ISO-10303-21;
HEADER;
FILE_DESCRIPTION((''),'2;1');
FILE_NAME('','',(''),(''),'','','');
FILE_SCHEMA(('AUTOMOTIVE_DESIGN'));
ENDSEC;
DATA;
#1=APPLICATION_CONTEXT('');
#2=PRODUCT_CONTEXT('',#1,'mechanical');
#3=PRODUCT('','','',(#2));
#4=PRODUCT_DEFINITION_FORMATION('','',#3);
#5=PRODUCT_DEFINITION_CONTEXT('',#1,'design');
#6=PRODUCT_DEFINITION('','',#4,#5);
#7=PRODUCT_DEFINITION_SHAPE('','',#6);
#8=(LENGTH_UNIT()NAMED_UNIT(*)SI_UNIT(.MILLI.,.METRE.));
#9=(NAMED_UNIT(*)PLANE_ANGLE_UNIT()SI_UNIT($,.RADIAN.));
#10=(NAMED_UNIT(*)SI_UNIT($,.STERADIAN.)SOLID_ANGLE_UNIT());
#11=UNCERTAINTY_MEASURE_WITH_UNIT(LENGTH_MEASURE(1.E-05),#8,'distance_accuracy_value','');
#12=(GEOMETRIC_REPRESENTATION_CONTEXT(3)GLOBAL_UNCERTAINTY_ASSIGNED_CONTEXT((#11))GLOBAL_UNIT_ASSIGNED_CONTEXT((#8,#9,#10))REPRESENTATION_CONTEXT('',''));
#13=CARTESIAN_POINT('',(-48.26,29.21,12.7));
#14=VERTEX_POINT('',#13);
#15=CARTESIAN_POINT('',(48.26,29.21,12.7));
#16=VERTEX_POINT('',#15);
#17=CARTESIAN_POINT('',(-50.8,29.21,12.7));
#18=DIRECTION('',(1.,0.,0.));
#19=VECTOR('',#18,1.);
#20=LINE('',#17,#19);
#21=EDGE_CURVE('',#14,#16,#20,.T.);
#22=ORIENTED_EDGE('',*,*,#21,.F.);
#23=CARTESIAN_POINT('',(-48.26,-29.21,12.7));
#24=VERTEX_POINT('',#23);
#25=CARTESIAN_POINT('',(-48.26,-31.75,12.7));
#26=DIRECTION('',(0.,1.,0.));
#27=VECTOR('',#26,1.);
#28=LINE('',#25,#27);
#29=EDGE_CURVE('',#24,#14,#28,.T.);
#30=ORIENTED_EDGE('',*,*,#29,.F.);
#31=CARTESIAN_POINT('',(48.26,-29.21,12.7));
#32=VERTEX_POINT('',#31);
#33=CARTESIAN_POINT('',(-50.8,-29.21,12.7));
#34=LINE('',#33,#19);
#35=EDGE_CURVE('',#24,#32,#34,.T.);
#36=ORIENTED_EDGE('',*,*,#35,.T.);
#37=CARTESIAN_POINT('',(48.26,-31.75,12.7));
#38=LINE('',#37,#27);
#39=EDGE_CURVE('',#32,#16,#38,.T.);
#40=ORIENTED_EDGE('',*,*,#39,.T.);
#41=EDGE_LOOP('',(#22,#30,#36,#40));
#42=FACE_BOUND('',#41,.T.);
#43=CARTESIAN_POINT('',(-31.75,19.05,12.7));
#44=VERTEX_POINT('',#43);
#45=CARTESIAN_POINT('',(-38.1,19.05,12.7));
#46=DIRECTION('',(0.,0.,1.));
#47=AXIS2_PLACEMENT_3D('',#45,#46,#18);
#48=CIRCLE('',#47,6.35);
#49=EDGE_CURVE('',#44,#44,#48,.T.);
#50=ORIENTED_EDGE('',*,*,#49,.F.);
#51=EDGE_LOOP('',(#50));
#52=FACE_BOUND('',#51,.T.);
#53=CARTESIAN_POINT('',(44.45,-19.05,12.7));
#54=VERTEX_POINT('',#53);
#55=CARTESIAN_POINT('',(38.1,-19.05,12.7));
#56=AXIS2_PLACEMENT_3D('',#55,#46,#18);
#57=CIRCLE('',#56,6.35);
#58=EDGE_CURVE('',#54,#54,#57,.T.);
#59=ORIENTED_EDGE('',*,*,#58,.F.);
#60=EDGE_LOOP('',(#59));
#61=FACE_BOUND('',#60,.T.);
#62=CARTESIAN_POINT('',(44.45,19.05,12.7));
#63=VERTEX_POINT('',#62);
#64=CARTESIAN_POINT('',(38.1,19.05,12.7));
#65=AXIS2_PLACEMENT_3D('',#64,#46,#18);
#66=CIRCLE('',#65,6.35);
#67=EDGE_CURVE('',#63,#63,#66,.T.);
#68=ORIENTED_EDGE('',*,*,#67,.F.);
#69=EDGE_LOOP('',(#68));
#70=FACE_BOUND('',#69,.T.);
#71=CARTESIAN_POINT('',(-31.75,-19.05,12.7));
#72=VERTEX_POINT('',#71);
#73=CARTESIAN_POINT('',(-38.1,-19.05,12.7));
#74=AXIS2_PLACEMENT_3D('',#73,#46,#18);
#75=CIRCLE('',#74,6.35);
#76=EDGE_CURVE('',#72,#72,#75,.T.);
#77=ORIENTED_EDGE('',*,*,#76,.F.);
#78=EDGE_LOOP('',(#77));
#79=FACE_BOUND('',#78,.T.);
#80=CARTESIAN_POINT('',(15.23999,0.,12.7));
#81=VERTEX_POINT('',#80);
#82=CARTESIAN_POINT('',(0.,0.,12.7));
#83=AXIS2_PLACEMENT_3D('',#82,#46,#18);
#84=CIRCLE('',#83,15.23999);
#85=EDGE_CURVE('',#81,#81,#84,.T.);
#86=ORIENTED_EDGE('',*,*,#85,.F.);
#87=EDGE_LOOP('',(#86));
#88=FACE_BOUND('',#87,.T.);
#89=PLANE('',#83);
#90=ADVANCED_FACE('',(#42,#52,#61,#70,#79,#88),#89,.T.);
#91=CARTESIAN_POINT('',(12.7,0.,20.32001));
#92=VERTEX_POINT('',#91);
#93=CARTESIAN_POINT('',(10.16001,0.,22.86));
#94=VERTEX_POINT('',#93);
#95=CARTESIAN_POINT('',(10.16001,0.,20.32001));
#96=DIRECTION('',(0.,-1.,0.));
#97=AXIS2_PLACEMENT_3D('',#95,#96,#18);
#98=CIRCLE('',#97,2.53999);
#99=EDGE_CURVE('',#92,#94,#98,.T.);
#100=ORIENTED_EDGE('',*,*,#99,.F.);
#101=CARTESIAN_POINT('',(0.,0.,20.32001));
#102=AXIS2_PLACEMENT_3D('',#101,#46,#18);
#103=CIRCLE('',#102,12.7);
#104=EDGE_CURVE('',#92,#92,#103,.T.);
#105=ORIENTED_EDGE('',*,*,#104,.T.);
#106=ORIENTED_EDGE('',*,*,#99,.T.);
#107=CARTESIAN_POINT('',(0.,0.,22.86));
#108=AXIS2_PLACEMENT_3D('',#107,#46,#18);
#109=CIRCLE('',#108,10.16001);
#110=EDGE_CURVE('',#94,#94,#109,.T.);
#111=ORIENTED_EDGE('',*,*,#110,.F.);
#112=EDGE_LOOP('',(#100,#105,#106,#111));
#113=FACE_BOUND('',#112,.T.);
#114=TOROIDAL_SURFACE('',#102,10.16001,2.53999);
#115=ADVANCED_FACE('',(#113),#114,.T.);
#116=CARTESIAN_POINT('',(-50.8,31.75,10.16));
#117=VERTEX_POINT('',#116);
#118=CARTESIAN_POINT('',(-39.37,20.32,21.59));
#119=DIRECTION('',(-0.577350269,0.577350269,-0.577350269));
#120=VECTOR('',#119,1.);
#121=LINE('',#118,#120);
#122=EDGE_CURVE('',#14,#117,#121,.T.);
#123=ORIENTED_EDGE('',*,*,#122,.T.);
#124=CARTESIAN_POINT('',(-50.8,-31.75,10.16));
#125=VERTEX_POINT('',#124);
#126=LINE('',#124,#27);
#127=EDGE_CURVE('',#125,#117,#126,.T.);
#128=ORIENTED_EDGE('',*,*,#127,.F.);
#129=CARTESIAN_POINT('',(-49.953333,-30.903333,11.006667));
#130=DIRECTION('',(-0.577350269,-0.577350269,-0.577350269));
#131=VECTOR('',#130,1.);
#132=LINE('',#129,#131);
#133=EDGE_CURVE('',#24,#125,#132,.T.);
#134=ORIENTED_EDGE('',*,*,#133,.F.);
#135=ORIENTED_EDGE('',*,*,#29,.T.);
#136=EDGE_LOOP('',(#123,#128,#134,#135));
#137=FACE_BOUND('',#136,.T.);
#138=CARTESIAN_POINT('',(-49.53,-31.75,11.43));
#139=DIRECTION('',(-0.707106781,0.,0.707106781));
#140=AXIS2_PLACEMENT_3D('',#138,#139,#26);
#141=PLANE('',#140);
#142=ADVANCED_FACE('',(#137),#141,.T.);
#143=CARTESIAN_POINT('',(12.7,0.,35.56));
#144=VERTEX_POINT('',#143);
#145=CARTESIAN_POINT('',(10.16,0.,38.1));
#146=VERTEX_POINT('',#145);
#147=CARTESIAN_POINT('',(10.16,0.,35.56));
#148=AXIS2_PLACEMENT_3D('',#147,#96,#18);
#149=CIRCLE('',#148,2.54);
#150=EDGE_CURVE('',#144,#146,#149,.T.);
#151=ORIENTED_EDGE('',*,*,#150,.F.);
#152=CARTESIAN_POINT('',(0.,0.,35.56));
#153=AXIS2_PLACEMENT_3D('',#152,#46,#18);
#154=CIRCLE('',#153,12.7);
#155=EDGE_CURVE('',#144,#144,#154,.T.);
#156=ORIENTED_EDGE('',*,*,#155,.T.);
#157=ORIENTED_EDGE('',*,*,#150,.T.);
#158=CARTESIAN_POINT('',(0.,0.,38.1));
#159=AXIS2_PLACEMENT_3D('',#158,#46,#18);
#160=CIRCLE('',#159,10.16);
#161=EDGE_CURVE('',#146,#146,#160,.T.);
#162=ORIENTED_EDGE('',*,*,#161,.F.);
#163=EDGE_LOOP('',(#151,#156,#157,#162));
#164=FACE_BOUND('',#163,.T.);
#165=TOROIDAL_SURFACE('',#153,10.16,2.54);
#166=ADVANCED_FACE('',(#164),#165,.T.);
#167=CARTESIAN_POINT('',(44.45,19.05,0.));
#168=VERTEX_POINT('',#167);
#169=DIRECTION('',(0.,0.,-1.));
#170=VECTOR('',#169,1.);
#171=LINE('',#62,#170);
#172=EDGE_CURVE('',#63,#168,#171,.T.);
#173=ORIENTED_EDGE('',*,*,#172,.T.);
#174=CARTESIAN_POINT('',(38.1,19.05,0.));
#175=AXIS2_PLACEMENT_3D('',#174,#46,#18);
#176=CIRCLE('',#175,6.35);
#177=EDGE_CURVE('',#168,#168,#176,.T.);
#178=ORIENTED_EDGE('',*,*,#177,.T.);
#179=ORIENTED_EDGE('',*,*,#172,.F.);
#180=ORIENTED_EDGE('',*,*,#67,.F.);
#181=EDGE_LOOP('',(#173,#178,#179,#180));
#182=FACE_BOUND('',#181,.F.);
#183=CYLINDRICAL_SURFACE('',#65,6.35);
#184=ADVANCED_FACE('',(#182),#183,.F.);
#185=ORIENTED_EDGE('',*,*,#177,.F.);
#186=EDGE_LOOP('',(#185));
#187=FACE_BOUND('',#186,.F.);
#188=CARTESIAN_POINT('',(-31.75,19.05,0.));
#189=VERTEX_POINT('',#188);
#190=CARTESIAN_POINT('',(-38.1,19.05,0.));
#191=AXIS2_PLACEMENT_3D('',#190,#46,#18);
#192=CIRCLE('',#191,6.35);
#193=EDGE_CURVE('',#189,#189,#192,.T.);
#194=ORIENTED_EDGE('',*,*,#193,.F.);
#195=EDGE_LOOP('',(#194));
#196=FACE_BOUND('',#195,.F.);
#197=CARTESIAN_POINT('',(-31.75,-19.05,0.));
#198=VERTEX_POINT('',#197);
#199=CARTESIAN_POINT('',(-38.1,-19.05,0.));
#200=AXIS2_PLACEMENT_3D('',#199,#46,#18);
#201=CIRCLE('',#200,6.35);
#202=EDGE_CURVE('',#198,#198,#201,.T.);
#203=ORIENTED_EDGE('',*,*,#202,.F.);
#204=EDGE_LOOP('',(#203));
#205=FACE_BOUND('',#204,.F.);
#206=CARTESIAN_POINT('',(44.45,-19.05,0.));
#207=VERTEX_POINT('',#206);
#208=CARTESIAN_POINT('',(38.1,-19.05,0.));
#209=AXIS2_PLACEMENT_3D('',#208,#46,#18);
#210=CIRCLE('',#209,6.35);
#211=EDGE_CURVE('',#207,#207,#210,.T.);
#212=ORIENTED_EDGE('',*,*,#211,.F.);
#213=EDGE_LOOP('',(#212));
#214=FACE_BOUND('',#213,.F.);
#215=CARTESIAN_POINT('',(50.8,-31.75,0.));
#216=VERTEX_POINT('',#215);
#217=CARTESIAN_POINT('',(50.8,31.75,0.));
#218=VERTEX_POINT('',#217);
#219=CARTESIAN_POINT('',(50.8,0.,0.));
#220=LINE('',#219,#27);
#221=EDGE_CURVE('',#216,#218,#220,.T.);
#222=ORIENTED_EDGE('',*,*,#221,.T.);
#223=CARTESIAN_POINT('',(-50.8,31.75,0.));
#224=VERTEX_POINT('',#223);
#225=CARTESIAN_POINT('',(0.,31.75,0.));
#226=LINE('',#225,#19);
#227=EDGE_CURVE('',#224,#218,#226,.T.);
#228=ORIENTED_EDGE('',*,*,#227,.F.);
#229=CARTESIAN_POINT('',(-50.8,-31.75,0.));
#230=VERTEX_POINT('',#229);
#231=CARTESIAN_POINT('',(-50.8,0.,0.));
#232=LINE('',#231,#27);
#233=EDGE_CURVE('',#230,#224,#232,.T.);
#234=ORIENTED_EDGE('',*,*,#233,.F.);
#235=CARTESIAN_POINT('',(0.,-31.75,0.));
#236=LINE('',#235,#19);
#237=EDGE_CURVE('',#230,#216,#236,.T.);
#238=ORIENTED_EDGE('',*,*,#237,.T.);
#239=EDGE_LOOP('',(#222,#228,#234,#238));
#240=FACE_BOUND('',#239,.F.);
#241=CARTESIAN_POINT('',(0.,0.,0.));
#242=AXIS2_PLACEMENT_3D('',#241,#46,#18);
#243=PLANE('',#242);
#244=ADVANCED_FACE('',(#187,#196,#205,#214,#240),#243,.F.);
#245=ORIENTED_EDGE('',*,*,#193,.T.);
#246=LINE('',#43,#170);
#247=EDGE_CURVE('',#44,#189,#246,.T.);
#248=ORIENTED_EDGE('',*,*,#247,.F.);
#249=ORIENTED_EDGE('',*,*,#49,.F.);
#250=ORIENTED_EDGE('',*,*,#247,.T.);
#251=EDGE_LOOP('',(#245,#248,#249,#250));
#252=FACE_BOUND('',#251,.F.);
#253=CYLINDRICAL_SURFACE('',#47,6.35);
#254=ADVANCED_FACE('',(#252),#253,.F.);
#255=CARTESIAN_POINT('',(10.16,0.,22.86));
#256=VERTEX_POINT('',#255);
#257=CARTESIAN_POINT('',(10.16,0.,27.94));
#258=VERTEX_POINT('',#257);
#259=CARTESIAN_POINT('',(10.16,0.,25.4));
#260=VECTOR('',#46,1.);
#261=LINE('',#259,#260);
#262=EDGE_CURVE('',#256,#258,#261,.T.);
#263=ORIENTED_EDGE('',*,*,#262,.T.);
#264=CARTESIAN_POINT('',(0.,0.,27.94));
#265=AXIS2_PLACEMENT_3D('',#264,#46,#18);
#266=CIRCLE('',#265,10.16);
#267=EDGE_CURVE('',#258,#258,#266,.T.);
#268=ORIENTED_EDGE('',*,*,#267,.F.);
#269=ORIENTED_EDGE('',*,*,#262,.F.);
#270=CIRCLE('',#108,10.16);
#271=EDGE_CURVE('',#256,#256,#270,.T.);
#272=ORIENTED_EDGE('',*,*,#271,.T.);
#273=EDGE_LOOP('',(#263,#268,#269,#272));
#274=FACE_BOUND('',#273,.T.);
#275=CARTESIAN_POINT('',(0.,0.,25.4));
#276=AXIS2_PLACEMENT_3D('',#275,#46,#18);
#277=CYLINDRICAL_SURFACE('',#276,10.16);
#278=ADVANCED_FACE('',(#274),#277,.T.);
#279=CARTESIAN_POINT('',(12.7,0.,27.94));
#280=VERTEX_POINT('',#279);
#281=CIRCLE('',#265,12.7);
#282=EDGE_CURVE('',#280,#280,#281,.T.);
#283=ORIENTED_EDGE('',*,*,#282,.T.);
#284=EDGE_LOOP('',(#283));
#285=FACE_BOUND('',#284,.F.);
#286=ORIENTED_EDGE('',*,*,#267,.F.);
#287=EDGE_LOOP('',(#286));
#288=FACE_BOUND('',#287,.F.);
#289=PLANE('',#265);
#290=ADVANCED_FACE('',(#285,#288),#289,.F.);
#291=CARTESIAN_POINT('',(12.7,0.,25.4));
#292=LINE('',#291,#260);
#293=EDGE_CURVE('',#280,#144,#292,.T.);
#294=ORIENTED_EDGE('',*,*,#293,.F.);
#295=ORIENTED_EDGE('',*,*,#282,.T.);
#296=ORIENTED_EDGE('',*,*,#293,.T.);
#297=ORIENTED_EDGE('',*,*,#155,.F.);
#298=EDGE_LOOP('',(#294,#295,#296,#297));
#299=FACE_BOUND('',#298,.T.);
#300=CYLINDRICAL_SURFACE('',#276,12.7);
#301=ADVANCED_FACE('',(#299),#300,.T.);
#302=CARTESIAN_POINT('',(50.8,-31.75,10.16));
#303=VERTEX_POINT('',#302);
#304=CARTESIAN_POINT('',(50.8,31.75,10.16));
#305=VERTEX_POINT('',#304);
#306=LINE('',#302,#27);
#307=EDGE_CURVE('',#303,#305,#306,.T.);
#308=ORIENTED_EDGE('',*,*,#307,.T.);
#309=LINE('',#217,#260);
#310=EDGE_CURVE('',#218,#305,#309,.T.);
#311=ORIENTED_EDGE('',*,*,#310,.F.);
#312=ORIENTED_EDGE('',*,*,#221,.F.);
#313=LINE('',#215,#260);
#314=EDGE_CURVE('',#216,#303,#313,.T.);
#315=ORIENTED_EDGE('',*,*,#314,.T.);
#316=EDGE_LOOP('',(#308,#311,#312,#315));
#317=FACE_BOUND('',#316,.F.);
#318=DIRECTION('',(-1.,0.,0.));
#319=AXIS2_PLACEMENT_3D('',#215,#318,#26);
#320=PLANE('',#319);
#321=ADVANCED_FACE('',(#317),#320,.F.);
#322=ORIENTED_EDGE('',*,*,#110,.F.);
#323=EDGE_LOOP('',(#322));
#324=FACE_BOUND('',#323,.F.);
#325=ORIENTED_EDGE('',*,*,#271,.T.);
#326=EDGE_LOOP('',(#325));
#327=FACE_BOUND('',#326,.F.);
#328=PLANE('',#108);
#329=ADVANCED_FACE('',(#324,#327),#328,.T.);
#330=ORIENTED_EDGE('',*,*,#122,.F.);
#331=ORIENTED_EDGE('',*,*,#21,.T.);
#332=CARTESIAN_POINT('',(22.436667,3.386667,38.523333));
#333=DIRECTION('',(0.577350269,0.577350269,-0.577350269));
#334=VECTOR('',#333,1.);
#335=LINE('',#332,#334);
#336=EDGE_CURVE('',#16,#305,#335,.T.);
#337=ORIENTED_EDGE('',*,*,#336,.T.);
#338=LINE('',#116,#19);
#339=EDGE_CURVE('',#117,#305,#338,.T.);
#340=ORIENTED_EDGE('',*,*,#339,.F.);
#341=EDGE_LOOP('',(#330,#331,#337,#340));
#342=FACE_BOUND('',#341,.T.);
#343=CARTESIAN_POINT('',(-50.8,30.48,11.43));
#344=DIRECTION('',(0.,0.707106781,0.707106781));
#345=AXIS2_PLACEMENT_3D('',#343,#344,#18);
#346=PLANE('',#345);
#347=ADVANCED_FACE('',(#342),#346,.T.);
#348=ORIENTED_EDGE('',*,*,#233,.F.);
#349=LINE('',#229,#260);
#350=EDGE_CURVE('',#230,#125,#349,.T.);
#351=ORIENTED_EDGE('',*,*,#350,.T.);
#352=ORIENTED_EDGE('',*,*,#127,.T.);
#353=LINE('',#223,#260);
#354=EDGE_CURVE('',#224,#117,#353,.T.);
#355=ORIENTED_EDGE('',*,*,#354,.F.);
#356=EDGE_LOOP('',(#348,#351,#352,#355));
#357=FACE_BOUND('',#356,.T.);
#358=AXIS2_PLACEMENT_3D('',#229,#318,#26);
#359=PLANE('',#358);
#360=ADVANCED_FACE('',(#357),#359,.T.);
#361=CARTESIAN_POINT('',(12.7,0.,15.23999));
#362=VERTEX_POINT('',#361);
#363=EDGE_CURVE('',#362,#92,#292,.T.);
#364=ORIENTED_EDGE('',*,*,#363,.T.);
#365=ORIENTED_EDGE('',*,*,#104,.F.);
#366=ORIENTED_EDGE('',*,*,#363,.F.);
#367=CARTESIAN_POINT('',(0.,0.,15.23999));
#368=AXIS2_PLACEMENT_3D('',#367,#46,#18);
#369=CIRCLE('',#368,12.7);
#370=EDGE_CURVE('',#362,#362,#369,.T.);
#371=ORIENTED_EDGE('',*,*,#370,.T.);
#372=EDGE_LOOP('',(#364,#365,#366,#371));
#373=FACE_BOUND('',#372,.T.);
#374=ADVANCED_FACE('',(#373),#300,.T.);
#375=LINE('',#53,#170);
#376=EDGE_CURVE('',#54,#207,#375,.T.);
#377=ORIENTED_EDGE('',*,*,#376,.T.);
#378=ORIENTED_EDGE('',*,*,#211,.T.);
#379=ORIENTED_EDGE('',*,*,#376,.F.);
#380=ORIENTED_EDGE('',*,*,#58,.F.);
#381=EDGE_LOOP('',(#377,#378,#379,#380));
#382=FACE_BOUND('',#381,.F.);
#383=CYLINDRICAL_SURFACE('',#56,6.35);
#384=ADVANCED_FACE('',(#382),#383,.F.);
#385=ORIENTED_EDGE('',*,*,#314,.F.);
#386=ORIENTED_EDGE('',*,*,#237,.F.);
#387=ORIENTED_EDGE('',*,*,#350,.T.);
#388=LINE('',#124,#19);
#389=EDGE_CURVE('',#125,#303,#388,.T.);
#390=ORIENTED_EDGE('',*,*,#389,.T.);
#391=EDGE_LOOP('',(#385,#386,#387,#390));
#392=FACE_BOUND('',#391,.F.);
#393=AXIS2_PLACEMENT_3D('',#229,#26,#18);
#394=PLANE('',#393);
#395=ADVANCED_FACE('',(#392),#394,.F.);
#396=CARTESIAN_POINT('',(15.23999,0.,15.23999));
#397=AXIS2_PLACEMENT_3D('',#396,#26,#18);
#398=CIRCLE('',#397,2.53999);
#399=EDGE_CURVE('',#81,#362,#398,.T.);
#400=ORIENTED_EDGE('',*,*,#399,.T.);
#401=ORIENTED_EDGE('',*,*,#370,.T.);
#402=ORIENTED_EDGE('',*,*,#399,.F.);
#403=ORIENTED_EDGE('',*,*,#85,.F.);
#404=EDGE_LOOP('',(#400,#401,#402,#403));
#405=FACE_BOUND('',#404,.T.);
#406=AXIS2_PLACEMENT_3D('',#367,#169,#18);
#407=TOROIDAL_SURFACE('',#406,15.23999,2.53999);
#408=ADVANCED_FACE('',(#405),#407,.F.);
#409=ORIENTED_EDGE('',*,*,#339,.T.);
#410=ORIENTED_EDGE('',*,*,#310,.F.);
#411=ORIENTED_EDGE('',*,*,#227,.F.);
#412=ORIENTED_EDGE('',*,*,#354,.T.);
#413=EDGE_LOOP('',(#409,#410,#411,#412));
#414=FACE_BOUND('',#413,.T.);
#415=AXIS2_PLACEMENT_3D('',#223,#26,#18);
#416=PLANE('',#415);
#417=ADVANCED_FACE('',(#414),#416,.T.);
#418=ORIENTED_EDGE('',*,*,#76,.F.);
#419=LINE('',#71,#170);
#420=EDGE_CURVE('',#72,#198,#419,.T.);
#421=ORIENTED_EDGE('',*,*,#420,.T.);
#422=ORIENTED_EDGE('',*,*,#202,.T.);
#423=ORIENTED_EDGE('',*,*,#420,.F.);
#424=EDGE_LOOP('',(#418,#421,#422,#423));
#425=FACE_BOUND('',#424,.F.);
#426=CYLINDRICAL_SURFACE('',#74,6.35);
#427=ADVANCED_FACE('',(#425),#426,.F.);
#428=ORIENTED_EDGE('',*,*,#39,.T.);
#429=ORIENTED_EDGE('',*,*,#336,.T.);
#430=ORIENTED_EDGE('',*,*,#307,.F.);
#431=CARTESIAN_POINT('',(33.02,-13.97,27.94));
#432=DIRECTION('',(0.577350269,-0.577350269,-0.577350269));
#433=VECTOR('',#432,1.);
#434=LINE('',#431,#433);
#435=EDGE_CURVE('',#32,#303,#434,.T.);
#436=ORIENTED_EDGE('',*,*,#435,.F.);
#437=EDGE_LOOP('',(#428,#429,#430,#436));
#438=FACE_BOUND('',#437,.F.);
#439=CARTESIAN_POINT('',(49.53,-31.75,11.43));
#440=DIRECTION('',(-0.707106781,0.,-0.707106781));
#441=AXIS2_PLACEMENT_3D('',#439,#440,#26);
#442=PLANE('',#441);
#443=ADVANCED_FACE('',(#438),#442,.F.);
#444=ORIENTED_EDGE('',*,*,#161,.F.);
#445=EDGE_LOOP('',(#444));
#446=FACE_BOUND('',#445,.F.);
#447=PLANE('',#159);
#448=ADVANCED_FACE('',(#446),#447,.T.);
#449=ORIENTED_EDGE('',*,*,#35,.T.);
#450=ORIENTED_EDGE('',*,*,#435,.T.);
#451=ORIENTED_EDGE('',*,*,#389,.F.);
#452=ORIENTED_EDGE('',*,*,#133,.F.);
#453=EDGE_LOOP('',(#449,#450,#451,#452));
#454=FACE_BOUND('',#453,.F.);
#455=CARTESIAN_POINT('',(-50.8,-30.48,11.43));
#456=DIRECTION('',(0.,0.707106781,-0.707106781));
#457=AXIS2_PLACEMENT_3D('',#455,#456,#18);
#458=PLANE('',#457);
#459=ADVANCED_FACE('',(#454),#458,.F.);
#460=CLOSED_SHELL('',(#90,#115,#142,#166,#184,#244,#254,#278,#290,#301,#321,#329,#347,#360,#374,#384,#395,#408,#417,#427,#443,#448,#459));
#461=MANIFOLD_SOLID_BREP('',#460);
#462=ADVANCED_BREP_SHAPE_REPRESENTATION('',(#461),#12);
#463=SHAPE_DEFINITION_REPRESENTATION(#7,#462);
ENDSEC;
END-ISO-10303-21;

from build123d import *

# Parameters (mm, degrees)
F0_W     = 101.6
F0_H     = 63.5
F1_DEPTH = 12.7
F2_R     = 6.35
F3_DEPTH = 12.701
F4_W     = 12.7
F4_H     = 25.4
F6_W     = 4.7343277841
F6_H     = 5.08
F6_W_2   = 2.54
F8_R     = 2.53999
F9_R     = 2.54
F10_SIZE = 2.54


# Not quite as in the source:
# - a fillet or chamfer is up to 0.001 mm smaller than in the source, because OpenCascade refuses the exact size


with BuildPart() as f1:
    # F0 (on Top) → F1 (new body)
    with BuildSketch(Plane.XY):
        Rectangle(F0_W, F0_H)
    extrude(amount=F1_DEPTH)

    # F2 (on face) → F3 (cut, through all)
    with BuildSketch(Plane.XY.offset(12.7)):
        with Locations((-38.1, 19.05)):
            Circle(F2_R)
        with Locations((38.1, 19.05)):
            Circle(F2_R)
        with Locations((38.1, -19.05)):
            Circle(F2_R)
        with Locations((-38.1, -19.05)):
            Circle(F2_R)
    extrude(amount=-F3_DEPTH, mode=Mode.SUBTRACT)

    # F4 (on Front) → F5 (revolve)
    with BuildSketch(Plane.XZ):
        with Locations((6.35, 25.4)):
            Rectangle(F4_W, F4_H)
    revolve(axis=Axis((0, 0, 25.4), (0, 0, 1)))

    # F6 (on Front) → F7 (revolve, cut)
    with BuildSketch(Plane.XZ):
        with Locations((15.067163892, 25.4)):
            Rectangle(F6_W, F6_H)
        with Locations((11.43, 25.4)):
            Rectangle(F6_W_2, F6_H)
    revolve(axis=Axis((0, 0, 12.7), (0, 0, 1)), mode=Mode.SUBTRACT)

    # F8 (radius 2.54 in the source; OpenCascade refuses exactly that, so slightly less here)
    f8_edges = [f1.edges().sort_by_distance(p)[0] for p in [
        (-12.7, 0, 12.7),
        (-12.7, 0, 22.86),
    ]]
    fillet(f8_edges, radius=F8_R)

    # F9
    f9_edges = [f1.edges().sort_by_distance(p)[0] for p in [
        (-12.7, 0, 38.1),
    ]]
    fillet(f9_edges, radius=F9_R)

    # F10
    f10_edges = [f1.edges().sort_by_distance(p)[0] for p in [
        (-50.8, 0, 12.7),
        (0, -31.75, 12.7),
        (0, 31.75, 12.7),
        (50.8, 0, 12.7),
    ]]
    chamfer(f10_edges, length=F10_SIZE)


solid = f1.part
